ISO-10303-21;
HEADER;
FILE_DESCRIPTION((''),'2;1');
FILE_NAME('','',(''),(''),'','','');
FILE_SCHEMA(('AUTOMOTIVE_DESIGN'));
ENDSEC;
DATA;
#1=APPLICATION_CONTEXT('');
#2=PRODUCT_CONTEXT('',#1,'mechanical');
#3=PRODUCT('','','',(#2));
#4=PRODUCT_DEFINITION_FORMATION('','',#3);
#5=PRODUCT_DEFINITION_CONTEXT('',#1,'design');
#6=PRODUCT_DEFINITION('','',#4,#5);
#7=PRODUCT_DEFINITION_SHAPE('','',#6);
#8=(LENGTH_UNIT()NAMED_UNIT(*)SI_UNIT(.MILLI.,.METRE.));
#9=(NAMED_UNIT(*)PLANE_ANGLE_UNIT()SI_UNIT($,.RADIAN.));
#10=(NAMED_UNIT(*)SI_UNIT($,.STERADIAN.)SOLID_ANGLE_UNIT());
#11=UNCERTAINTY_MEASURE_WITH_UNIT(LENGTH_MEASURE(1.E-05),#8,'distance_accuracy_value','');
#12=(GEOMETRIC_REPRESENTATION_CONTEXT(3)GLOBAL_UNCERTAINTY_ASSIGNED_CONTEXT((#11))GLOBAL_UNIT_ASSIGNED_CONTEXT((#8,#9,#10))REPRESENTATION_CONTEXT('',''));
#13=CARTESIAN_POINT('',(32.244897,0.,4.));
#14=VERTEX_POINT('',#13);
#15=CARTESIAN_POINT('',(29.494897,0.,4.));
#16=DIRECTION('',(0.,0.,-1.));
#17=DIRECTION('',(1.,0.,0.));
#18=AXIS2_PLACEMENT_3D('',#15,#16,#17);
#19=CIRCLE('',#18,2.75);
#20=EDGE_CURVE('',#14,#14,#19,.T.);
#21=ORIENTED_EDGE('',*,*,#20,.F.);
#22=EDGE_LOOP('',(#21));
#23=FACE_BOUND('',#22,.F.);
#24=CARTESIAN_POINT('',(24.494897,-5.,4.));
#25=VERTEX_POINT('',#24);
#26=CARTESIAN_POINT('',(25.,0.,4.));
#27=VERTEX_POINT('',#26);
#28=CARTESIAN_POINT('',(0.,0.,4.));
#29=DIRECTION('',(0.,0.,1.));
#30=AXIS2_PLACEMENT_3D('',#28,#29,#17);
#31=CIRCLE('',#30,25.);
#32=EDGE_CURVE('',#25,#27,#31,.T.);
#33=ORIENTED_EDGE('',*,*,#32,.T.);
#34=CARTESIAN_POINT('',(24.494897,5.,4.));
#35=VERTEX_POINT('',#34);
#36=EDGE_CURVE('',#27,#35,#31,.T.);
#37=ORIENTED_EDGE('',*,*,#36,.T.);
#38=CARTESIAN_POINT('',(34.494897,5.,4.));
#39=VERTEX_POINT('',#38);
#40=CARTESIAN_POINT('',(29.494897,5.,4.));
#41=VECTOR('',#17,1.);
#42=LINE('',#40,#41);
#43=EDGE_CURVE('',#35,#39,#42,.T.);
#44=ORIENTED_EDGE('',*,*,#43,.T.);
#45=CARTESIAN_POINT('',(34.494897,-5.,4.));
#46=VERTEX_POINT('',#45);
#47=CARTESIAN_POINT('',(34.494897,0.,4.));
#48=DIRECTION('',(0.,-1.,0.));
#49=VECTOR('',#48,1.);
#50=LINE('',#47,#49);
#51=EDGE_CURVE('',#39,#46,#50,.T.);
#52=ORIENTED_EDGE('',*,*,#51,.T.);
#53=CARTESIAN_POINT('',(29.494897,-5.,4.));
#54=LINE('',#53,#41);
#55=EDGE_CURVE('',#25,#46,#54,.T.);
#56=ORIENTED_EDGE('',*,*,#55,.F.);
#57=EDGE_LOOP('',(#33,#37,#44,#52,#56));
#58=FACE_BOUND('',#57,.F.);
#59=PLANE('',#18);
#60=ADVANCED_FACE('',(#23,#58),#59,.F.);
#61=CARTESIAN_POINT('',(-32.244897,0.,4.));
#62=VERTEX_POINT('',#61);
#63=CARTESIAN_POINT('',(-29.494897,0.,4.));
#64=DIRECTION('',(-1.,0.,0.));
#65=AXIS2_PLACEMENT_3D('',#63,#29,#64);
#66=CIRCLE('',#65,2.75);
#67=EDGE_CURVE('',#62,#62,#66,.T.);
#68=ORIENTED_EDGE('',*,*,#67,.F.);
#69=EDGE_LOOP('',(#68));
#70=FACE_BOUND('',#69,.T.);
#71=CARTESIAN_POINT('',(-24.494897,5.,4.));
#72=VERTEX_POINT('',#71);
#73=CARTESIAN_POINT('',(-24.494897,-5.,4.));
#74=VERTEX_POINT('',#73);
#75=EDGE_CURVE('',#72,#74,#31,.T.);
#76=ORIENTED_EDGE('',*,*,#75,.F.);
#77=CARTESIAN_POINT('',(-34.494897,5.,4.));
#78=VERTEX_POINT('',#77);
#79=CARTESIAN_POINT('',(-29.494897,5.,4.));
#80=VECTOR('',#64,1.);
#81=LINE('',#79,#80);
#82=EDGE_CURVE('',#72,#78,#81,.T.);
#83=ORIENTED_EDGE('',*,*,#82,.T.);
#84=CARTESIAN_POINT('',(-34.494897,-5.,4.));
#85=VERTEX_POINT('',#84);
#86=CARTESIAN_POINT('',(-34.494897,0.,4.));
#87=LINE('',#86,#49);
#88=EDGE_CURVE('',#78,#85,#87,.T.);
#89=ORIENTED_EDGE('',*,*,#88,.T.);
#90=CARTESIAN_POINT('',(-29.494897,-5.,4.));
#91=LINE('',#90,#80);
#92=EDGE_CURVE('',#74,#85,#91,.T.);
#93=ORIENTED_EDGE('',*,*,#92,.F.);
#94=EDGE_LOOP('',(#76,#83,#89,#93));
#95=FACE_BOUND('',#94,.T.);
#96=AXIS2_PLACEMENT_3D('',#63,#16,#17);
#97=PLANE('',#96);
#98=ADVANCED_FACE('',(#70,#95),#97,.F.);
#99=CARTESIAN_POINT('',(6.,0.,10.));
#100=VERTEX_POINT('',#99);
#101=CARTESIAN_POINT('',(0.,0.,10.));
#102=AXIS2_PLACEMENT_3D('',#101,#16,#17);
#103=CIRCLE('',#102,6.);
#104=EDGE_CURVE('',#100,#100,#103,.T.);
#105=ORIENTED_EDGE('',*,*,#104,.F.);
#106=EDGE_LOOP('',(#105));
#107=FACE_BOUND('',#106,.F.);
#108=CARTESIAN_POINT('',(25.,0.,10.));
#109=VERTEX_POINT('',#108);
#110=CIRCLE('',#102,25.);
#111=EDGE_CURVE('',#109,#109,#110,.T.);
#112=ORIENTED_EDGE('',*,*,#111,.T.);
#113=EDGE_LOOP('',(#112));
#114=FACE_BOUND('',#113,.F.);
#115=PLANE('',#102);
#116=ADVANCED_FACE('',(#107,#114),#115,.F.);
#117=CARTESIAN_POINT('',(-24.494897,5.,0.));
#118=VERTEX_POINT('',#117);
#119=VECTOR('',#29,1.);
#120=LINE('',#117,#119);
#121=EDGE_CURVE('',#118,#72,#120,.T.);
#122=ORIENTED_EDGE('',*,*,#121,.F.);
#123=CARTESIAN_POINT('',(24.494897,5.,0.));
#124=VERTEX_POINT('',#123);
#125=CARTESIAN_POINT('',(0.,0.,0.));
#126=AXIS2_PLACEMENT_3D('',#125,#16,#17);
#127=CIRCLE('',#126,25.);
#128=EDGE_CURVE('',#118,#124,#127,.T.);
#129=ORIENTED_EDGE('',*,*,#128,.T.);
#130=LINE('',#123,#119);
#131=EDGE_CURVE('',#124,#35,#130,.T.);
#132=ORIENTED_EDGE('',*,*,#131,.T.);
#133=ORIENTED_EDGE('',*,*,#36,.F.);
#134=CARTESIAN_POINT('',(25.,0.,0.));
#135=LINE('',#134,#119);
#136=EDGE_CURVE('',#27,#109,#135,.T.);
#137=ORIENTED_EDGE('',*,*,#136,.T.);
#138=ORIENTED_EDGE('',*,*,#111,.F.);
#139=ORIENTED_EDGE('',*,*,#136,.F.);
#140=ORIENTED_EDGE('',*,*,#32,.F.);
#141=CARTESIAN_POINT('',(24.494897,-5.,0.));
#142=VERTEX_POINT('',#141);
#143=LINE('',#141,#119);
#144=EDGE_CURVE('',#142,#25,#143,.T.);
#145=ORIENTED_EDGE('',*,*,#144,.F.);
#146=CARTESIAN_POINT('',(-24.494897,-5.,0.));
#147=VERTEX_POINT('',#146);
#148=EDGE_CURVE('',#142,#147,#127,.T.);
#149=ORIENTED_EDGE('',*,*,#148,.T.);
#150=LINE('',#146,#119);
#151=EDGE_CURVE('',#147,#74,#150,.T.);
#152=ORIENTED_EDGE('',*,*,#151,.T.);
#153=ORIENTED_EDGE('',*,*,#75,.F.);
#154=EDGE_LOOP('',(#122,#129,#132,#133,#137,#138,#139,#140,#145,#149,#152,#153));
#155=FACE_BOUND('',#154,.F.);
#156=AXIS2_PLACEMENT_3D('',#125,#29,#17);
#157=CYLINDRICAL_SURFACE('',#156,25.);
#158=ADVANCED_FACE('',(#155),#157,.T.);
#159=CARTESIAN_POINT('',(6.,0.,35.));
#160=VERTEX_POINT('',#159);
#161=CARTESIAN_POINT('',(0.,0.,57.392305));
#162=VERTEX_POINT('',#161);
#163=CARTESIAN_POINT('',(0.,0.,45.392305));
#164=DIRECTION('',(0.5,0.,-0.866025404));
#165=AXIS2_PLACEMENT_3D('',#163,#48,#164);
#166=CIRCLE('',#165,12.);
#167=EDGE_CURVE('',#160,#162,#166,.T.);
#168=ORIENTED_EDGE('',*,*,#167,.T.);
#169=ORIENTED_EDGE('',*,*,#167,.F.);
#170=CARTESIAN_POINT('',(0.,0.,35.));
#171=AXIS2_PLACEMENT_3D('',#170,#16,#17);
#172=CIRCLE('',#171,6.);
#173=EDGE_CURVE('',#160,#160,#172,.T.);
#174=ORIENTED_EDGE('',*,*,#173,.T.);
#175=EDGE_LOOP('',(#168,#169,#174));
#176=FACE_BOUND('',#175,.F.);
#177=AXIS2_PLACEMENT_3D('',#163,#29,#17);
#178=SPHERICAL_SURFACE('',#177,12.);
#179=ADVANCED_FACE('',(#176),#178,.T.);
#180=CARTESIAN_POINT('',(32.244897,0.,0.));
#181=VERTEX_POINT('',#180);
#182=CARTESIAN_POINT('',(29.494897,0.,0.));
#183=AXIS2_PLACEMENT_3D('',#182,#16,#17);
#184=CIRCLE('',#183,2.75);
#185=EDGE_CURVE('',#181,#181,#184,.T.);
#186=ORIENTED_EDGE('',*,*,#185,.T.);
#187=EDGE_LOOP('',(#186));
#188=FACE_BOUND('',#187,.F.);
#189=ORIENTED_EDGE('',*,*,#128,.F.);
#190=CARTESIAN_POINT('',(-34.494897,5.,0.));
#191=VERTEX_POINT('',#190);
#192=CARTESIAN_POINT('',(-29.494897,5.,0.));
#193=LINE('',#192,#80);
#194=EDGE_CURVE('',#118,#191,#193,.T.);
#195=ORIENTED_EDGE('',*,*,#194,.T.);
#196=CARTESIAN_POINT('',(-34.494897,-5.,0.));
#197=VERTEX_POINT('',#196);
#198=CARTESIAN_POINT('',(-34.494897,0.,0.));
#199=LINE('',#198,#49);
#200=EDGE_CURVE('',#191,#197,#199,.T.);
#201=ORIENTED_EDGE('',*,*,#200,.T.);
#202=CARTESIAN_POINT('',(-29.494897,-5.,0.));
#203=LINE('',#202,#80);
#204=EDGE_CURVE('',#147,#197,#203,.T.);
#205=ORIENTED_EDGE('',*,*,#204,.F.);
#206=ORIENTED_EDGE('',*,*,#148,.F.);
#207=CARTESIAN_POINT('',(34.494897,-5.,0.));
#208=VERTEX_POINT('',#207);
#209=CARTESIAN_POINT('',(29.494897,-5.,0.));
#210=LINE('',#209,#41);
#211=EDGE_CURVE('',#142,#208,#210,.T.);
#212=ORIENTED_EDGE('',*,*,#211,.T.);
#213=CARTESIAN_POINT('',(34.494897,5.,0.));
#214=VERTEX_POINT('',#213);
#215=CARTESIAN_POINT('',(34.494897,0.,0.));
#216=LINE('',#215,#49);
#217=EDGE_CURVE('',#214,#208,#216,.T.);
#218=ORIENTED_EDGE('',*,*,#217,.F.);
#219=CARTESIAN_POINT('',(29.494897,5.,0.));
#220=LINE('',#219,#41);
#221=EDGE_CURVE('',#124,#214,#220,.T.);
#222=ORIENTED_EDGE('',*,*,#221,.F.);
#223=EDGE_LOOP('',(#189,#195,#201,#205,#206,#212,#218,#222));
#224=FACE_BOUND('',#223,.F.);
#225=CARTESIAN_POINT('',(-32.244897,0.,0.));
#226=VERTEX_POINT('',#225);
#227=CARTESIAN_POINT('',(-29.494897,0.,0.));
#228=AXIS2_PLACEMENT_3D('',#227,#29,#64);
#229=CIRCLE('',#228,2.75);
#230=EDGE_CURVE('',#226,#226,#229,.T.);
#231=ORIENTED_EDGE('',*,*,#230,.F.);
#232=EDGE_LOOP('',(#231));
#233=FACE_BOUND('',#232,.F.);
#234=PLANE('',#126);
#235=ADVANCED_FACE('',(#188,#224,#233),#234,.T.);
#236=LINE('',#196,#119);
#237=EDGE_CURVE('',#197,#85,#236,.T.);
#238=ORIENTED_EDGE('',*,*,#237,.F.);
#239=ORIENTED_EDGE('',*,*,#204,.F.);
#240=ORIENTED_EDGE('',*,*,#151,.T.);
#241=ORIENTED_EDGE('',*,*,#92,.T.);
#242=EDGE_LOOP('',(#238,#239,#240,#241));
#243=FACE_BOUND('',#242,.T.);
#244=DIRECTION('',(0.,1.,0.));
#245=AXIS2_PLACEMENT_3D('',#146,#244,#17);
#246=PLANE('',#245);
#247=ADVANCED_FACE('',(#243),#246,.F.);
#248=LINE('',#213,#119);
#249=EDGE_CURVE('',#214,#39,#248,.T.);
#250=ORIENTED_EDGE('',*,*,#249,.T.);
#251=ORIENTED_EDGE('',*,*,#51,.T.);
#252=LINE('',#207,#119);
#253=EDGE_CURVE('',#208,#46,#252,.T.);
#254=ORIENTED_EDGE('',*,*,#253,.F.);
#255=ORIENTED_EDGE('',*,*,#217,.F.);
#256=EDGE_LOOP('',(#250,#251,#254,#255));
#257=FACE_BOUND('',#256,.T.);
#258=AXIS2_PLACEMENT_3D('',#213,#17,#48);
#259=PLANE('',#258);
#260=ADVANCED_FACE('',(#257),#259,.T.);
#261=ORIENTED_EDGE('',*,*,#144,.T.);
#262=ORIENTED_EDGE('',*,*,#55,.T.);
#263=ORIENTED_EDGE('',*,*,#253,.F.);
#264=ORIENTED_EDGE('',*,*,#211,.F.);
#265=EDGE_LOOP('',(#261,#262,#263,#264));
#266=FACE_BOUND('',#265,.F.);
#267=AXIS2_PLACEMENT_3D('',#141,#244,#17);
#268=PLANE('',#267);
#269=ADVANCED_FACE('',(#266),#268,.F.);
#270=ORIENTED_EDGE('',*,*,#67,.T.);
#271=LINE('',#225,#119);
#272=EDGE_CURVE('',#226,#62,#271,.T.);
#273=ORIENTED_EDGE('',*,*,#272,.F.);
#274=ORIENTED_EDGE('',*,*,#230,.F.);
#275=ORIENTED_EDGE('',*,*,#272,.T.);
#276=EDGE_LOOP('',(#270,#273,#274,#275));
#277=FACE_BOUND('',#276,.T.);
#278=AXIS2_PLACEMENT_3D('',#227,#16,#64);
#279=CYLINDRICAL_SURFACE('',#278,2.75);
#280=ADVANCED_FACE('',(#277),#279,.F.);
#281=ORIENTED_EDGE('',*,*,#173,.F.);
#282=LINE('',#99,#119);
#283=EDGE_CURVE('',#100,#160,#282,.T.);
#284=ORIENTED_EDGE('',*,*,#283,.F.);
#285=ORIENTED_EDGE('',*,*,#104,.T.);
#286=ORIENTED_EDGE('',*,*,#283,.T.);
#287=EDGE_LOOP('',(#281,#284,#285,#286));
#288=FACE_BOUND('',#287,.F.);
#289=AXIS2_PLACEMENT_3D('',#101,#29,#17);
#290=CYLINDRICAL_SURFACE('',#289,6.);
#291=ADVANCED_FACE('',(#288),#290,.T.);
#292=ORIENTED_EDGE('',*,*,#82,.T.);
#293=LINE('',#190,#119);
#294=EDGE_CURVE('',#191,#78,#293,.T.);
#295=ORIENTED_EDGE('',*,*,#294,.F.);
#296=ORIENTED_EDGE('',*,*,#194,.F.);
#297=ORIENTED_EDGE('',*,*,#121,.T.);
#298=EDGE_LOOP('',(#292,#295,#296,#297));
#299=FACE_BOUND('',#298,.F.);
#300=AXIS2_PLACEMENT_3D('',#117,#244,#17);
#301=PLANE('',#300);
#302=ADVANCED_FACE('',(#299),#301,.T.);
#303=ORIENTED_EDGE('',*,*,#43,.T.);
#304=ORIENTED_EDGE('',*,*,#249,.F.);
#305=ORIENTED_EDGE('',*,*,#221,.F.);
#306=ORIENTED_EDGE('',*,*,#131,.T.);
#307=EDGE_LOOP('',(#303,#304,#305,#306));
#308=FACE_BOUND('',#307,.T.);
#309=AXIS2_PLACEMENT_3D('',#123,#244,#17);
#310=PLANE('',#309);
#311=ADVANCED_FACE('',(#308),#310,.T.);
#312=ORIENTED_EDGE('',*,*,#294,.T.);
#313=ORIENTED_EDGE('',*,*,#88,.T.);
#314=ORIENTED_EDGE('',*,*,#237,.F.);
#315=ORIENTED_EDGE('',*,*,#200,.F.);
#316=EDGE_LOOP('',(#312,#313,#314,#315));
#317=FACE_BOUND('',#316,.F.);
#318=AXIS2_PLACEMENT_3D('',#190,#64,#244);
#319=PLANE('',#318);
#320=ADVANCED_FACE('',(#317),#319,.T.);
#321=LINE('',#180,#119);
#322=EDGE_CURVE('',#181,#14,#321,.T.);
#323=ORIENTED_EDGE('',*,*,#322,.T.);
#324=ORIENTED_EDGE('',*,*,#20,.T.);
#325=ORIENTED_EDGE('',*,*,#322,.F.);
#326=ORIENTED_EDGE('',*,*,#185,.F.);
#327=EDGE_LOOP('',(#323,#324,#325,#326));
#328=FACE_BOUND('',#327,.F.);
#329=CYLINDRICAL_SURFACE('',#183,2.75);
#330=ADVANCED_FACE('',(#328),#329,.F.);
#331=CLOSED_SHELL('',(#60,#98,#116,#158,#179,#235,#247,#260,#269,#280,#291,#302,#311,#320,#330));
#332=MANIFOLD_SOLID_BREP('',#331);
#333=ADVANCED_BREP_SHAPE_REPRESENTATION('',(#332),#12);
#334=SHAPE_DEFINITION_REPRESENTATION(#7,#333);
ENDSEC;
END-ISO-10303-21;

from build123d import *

# Parameters (mm, degrees)
F2_W     = 10
F2_H     = 10
F2_R     = 2.75
F3_DEPTH = 4


# Not quite as in the source:
# - a pattern or mirror of a feature is missing from the dataset's text; its kind, count and spacing are read off the source's solid


with BuildPart() as f1:
    # F0 (on Front) → F1 (revolve)
    with BuildSketch(Plane.XZ):
        with BuildLine():
            Line((25, 10), (6, 10))
            Line((6, 10), (6, 35))
            ThreePointArc((6, 35), (11.5911099155, 48.4981333866), (0, 57.3923048454))
            Line((0, 57.3923048454), (0, 0))
            Line((0, 0), (25, 0))
            Line((25, 0), (25, 10))
        make_face()
    revolve(axis=Axis((0, 0, 28.6961524227), (0, 0, -1)))

    # F2 (on face) → F3 (join)
    with BuildSketch(Plane(origin=(0, 0, 0), x_dir=(1, 0, 0), z_dir=(0, 0, -1))):
        with Locations((29.4948974278, 0)):
            Rectangle(F2_W, F2_H)
        with Locations((29.4948974278, 0)):
            Circle(F2_R, mode=Mode.SUBTRACT)
    f3 = extrude(amount=-F3_DEPTH)

    # F3_copies: F3 across plane
    add(f3.mirror(Plane(origin=(0, 0, 0), x_dir=(0, 0, -1), z_dir=(-1, 0, 0))))


solid = f1.part
